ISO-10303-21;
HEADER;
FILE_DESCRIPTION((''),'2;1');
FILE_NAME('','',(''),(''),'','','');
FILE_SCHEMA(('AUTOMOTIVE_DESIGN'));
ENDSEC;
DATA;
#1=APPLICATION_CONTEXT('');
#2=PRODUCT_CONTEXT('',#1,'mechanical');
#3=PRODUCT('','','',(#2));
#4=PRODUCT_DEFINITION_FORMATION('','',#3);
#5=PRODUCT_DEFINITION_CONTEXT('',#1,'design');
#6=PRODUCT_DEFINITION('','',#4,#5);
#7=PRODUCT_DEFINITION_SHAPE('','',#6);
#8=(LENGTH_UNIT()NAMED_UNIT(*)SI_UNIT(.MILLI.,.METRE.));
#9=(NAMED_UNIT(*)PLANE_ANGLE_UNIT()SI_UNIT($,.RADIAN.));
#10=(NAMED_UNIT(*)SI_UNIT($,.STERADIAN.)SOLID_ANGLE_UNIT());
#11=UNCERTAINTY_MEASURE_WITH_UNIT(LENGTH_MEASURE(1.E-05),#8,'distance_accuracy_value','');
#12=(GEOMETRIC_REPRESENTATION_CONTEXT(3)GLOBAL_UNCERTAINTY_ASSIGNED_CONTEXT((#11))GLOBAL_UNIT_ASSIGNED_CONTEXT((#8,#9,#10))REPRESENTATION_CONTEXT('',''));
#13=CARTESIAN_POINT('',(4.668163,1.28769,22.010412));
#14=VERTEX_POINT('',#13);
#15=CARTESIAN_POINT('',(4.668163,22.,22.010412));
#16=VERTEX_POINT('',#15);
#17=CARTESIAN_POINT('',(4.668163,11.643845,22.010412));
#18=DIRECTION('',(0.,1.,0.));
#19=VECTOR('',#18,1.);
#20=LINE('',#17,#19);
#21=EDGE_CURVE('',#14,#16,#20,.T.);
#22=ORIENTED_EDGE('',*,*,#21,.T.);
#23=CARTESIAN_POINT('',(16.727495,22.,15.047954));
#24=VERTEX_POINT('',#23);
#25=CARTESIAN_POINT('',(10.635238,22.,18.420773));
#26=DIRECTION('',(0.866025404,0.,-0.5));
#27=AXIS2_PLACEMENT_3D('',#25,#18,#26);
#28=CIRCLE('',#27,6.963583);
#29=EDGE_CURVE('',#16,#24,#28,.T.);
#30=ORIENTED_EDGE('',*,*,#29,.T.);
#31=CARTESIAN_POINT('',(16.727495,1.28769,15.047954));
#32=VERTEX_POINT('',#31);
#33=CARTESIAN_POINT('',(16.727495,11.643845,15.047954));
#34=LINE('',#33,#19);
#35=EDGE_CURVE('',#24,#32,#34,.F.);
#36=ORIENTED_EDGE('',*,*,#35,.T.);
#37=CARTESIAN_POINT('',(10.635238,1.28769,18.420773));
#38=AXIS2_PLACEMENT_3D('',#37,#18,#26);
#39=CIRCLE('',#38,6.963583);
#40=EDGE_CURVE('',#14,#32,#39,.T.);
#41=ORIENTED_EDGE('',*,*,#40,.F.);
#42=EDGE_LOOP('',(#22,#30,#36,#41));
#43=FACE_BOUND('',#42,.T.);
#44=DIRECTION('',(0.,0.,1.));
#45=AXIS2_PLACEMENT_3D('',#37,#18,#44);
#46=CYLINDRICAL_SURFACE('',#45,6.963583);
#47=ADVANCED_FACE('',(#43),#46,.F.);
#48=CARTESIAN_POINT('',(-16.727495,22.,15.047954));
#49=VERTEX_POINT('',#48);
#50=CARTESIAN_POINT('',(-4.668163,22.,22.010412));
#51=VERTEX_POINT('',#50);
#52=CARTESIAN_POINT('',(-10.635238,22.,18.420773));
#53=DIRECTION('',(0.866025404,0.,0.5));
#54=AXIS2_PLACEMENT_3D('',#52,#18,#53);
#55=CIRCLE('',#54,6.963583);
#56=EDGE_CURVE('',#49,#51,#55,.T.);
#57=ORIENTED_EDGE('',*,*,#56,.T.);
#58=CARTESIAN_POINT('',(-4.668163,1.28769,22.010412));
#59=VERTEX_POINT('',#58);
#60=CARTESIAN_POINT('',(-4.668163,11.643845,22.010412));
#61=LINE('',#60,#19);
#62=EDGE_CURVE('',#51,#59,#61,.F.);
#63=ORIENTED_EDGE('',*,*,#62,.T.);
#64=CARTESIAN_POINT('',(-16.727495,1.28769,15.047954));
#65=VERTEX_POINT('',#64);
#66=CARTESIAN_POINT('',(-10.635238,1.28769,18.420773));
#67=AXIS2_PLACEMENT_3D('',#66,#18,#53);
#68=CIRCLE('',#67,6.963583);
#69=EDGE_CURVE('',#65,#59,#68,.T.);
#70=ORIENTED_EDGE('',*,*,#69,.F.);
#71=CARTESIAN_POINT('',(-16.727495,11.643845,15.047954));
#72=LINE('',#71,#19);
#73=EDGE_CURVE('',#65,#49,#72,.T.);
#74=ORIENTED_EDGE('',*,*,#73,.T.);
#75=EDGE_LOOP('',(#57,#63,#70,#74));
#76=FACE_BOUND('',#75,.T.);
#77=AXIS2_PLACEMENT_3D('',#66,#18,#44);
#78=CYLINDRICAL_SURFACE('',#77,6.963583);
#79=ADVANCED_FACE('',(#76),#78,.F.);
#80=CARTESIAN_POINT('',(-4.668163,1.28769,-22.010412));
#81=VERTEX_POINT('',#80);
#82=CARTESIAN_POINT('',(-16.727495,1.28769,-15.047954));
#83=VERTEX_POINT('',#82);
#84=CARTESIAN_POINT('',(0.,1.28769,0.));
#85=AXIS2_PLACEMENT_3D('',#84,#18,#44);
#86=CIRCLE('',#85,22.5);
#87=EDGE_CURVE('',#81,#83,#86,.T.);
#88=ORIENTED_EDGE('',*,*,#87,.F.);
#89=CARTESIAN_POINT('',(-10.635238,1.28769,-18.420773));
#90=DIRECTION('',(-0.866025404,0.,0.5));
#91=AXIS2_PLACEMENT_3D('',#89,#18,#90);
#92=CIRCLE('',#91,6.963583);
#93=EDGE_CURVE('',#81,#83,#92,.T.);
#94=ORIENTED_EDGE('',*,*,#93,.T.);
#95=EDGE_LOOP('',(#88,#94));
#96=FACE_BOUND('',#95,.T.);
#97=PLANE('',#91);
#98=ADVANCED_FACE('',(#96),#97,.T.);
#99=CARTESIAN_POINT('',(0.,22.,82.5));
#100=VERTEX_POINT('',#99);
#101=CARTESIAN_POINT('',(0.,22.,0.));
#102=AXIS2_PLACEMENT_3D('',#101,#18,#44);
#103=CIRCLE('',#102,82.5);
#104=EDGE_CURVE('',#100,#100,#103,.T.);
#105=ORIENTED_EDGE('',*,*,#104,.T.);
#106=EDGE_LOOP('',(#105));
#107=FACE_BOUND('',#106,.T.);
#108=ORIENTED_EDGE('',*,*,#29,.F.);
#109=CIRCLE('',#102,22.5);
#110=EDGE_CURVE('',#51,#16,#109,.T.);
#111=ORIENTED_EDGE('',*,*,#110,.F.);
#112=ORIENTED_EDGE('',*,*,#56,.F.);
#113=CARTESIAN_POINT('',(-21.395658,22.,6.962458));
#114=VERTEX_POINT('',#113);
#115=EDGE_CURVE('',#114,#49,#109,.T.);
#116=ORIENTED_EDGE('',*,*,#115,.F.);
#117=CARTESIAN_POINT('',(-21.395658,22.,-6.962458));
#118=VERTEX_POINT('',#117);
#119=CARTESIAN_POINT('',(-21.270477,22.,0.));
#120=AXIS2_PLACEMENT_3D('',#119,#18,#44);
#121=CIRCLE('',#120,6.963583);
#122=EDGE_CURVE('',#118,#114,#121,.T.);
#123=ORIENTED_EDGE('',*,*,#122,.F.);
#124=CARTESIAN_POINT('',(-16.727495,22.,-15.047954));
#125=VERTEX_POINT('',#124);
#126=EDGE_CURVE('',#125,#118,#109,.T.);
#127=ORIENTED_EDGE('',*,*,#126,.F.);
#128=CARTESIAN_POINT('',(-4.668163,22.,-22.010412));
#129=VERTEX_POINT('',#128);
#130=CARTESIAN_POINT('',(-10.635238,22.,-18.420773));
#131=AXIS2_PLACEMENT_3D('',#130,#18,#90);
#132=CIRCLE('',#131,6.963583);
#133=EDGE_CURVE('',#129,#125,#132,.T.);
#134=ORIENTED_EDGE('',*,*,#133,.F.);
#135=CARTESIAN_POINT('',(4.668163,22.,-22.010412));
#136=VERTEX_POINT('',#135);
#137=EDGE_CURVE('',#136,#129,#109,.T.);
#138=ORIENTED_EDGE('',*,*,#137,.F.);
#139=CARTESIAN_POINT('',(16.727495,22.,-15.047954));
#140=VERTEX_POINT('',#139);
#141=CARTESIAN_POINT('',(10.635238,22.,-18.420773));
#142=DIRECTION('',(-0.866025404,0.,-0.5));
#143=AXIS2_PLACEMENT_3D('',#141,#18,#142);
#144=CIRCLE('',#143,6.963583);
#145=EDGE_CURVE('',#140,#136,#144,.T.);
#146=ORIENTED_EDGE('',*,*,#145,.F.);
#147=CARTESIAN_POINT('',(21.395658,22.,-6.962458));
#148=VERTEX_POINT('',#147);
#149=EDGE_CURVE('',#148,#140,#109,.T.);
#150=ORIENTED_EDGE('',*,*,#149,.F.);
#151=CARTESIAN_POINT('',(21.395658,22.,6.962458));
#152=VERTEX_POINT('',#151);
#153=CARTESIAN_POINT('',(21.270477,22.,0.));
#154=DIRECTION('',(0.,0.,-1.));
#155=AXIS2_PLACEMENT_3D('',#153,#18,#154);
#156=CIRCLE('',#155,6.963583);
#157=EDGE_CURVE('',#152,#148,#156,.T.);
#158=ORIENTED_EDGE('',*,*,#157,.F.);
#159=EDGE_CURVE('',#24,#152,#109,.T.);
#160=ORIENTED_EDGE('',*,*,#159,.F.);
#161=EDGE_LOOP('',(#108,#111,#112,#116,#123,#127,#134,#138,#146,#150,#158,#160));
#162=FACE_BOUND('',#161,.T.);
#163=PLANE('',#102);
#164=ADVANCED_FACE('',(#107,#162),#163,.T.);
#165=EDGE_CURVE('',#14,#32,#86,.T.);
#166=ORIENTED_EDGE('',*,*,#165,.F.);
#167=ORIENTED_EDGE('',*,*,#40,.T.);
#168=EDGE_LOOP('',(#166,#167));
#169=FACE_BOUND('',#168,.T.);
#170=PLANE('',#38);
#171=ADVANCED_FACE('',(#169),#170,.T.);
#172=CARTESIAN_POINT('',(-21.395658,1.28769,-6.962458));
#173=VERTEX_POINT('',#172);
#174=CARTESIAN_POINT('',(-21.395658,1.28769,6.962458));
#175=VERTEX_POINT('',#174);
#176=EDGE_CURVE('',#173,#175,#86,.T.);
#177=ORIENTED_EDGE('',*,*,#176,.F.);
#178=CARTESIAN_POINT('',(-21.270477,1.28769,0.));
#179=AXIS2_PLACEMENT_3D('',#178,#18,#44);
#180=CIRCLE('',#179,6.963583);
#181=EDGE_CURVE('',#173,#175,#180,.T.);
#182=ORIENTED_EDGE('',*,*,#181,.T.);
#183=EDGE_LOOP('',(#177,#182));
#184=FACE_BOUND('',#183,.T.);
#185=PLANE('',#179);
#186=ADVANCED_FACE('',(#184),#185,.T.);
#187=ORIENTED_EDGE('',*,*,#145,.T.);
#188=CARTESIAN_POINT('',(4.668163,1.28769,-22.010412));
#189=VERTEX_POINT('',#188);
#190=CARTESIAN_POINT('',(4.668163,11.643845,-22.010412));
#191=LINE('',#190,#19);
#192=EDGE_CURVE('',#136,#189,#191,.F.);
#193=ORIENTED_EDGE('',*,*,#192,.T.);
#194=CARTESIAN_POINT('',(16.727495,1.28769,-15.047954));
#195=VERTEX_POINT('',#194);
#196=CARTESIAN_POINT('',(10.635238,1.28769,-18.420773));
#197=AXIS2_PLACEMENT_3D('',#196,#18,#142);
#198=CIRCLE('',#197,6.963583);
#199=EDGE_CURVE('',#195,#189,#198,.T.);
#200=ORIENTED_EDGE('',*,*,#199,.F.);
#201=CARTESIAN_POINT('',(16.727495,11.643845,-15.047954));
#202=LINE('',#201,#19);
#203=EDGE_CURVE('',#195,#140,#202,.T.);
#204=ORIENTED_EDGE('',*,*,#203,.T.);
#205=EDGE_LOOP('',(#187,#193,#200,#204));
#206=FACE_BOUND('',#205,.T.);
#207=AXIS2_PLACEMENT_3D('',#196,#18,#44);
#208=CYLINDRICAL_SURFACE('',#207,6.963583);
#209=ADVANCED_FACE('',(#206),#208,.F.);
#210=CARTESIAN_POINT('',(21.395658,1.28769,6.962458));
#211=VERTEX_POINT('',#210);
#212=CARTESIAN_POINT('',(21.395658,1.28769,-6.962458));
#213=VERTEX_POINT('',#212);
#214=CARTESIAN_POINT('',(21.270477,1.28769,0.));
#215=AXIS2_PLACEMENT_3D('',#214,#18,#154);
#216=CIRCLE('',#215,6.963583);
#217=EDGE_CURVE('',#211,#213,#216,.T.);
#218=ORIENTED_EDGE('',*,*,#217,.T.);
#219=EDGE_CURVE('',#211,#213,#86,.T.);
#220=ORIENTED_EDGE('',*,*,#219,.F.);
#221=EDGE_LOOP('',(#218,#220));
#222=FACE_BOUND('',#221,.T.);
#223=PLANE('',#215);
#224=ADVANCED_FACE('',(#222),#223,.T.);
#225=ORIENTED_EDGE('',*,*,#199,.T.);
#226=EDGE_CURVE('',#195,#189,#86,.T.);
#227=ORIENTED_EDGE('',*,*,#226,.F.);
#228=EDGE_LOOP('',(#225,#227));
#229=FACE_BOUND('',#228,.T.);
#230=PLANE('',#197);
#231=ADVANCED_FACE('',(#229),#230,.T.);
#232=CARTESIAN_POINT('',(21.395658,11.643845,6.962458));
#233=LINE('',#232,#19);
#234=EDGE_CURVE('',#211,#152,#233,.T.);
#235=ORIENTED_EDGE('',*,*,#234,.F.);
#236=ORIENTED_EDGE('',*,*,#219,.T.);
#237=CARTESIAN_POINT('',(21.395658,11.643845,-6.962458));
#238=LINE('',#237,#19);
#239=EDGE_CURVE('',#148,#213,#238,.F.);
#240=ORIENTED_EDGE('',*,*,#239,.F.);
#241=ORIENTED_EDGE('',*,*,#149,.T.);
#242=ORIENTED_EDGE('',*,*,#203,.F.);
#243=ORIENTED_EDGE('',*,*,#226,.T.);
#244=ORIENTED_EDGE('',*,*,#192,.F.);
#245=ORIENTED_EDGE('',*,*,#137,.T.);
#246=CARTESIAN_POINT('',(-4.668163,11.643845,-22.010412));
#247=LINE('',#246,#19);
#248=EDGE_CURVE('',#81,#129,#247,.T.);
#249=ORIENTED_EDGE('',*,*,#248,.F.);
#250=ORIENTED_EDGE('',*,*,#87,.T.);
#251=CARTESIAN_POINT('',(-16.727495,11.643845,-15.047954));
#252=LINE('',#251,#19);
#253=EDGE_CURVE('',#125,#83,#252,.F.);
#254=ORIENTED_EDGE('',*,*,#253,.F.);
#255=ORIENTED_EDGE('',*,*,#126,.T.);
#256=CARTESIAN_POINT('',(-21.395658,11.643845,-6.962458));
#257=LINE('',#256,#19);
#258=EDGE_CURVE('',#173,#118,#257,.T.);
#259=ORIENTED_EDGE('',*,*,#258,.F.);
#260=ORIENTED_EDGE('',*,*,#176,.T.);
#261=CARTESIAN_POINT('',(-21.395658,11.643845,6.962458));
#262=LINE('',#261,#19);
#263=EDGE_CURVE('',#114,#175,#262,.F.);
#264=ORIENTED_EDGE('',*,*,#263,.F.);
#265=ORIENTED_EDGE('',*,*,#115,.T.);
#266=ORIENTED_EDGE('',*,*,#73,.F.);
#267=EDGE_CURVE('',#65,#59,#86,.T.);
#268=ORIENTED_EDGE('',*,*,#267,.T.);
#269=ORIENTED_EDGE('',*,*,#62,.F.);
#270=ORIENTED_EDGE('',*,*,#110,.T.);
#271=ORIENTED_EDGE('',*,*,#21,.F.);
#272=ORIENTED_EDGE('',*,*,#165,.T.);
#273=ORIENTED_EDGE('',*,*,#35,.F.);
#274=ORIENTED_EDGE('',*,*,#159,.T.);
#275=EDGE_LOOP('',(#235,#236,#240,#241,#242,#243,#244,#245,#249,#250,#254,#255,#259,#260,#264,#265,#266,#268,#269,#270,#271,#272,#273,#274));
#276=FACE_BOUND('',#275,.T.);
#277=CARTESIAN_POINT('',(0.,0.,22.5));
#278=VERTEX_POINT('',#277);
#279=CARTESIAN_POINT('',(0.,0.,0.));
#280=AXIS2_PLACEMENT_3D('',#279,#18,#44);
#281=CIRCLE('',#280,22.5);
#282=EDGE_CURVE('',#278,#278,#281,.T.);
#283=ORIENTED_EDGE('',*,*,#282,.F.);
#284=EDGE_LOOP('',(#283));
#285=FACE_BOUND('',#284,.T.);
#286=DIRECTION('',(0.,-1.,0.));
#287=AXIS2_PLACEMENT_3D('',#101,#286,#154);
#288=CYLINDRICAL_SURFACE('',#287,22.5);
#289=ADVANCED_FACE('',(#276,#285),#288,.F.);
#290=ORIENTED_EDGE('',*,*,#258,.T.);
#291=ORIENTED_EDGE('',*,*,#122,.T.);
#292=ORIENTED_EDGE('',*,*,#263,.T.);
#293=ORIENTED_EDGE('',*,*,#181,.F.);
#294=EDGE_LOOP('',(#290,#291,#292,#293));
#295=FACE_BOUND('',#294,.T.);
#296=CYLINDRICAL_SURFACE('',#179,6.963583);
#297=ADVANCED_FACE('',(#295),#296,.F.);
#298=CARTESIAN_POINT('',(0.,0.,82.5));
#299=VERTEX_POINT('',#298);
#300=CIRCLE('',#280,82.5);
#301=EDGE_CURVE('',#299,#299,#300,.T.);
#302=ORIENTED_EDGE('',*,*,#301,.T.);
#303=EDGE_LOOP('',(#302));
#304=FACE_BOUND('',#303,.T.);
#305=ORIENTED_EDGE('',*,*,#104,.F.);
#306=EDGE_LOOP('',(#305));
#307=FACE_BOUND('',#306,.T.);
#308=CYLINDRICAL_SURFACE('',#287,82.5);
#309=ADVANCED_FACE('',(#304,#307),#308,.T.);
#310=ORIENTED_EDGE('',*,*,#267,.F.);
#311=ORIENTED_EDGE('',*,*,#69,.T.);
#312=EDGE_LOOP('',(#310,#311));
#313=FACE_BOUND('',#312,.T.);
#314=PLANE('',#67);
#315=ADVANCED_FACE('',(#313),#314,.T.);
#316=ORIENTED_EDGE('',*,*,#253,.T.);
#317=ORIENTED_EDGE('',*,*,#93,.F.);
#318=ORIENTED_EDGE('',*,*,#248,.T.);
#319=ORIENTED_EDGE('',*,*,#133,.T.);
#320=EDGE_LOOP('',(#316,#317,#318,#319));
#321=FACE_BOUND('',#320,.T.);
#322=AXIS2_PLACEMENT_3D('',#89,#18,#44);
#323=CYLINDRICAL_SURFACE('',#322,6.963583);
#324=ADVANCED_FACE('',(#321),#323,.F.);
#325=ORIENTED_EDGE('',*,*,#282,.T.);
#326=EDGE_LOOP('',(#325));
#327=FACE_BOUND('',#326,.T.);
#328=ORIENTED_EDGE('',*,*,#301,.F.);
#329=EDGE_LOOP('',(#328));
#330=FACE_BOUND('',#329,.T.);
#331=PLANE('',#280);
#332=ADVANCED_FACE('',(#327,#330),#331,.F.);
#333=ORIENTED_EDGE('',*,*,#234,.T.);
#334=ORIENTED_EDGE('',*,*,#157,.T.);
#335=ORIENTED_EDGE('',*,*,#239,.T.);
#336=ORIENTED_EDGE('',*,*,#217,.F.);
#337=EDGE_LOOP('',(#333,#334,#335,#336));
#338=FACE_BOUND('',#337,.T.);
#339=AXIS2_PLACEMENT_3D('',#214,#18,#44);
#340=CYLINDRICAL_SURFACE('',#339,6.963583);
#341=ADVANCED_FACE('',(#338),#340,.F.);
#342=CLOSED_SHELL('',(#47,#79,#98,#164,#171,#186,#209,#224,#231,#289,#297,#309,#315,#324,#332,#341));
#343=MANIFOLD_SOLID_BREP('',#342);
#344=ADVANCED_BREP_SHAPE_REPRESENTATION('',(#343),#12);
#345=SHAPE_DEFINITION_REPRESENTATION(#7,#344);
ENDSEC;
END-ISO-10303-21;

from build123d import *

# Parameters (mm, degrees)
SKETCH1_R           = 82.5
BOSS_EXTRUDE1_DEPTH = 22
SKETCH2_R           = 22.5
CUT_EXTRUDE1_DEPTH  = 119.728682297
SKETCH3_R           = 6.963583344
CUT_EXTRUDE2_DEPTH  = 20.712310447
CIRPATTERN1_COUNT   = 6


with BuildPart() as part:
    # Sketch1 → Boss-Extrude1 (new body)
    with BuildSketch(Plane(origin=(0, 0, 0), x_dir=(1, 0, 0), z_dir=(0, 1, 0))):
        Circle(SKETCH1_R)
    extrude(amount=BOSS_EXTRUDE1_DEPTH)

    # Sketch2 → Cut-Extrude1 (cut, through all)
    with BuildSketch(Plane(origin=(0, 0, 0), x_dir=(1, 0, 0), z_dir=(0, 1, 0))):
        Circle(SKETCH2_R)
    extrude(amount=CUT_EXTRUDE1_DEPTH, mode=Mode.SUBTRACT)

    # Sketch3 → Cut-Extrude2 (cut)
    with BuildSketch(Plane(origin=(0, 22, 0), x_dir=(1, 0, 0), z_dir=(0, 1, 0))):
        with Locations((-21.270476699, 0)):
            Circle(SKETCH3_R)
    cut_extrude2 = extrude(amount=-CUT_EXTRUDE2_DEPTH, mode=Mode.SUBTRACT)

    # CirPattern1: Cut-Extrude2 ×6 about axis
    cirpattern1_axis = Axis((0, 0, 0), (0, 1, 0))
    for i in range(1, CIRPATTERN1_COUNT):
        add(cut_extrude2.rotate(cirpattern1_axis, i * 360 / CIRPATTERN1_COUNT), mode=Mode.SUBTRACT)


solid = part.part
